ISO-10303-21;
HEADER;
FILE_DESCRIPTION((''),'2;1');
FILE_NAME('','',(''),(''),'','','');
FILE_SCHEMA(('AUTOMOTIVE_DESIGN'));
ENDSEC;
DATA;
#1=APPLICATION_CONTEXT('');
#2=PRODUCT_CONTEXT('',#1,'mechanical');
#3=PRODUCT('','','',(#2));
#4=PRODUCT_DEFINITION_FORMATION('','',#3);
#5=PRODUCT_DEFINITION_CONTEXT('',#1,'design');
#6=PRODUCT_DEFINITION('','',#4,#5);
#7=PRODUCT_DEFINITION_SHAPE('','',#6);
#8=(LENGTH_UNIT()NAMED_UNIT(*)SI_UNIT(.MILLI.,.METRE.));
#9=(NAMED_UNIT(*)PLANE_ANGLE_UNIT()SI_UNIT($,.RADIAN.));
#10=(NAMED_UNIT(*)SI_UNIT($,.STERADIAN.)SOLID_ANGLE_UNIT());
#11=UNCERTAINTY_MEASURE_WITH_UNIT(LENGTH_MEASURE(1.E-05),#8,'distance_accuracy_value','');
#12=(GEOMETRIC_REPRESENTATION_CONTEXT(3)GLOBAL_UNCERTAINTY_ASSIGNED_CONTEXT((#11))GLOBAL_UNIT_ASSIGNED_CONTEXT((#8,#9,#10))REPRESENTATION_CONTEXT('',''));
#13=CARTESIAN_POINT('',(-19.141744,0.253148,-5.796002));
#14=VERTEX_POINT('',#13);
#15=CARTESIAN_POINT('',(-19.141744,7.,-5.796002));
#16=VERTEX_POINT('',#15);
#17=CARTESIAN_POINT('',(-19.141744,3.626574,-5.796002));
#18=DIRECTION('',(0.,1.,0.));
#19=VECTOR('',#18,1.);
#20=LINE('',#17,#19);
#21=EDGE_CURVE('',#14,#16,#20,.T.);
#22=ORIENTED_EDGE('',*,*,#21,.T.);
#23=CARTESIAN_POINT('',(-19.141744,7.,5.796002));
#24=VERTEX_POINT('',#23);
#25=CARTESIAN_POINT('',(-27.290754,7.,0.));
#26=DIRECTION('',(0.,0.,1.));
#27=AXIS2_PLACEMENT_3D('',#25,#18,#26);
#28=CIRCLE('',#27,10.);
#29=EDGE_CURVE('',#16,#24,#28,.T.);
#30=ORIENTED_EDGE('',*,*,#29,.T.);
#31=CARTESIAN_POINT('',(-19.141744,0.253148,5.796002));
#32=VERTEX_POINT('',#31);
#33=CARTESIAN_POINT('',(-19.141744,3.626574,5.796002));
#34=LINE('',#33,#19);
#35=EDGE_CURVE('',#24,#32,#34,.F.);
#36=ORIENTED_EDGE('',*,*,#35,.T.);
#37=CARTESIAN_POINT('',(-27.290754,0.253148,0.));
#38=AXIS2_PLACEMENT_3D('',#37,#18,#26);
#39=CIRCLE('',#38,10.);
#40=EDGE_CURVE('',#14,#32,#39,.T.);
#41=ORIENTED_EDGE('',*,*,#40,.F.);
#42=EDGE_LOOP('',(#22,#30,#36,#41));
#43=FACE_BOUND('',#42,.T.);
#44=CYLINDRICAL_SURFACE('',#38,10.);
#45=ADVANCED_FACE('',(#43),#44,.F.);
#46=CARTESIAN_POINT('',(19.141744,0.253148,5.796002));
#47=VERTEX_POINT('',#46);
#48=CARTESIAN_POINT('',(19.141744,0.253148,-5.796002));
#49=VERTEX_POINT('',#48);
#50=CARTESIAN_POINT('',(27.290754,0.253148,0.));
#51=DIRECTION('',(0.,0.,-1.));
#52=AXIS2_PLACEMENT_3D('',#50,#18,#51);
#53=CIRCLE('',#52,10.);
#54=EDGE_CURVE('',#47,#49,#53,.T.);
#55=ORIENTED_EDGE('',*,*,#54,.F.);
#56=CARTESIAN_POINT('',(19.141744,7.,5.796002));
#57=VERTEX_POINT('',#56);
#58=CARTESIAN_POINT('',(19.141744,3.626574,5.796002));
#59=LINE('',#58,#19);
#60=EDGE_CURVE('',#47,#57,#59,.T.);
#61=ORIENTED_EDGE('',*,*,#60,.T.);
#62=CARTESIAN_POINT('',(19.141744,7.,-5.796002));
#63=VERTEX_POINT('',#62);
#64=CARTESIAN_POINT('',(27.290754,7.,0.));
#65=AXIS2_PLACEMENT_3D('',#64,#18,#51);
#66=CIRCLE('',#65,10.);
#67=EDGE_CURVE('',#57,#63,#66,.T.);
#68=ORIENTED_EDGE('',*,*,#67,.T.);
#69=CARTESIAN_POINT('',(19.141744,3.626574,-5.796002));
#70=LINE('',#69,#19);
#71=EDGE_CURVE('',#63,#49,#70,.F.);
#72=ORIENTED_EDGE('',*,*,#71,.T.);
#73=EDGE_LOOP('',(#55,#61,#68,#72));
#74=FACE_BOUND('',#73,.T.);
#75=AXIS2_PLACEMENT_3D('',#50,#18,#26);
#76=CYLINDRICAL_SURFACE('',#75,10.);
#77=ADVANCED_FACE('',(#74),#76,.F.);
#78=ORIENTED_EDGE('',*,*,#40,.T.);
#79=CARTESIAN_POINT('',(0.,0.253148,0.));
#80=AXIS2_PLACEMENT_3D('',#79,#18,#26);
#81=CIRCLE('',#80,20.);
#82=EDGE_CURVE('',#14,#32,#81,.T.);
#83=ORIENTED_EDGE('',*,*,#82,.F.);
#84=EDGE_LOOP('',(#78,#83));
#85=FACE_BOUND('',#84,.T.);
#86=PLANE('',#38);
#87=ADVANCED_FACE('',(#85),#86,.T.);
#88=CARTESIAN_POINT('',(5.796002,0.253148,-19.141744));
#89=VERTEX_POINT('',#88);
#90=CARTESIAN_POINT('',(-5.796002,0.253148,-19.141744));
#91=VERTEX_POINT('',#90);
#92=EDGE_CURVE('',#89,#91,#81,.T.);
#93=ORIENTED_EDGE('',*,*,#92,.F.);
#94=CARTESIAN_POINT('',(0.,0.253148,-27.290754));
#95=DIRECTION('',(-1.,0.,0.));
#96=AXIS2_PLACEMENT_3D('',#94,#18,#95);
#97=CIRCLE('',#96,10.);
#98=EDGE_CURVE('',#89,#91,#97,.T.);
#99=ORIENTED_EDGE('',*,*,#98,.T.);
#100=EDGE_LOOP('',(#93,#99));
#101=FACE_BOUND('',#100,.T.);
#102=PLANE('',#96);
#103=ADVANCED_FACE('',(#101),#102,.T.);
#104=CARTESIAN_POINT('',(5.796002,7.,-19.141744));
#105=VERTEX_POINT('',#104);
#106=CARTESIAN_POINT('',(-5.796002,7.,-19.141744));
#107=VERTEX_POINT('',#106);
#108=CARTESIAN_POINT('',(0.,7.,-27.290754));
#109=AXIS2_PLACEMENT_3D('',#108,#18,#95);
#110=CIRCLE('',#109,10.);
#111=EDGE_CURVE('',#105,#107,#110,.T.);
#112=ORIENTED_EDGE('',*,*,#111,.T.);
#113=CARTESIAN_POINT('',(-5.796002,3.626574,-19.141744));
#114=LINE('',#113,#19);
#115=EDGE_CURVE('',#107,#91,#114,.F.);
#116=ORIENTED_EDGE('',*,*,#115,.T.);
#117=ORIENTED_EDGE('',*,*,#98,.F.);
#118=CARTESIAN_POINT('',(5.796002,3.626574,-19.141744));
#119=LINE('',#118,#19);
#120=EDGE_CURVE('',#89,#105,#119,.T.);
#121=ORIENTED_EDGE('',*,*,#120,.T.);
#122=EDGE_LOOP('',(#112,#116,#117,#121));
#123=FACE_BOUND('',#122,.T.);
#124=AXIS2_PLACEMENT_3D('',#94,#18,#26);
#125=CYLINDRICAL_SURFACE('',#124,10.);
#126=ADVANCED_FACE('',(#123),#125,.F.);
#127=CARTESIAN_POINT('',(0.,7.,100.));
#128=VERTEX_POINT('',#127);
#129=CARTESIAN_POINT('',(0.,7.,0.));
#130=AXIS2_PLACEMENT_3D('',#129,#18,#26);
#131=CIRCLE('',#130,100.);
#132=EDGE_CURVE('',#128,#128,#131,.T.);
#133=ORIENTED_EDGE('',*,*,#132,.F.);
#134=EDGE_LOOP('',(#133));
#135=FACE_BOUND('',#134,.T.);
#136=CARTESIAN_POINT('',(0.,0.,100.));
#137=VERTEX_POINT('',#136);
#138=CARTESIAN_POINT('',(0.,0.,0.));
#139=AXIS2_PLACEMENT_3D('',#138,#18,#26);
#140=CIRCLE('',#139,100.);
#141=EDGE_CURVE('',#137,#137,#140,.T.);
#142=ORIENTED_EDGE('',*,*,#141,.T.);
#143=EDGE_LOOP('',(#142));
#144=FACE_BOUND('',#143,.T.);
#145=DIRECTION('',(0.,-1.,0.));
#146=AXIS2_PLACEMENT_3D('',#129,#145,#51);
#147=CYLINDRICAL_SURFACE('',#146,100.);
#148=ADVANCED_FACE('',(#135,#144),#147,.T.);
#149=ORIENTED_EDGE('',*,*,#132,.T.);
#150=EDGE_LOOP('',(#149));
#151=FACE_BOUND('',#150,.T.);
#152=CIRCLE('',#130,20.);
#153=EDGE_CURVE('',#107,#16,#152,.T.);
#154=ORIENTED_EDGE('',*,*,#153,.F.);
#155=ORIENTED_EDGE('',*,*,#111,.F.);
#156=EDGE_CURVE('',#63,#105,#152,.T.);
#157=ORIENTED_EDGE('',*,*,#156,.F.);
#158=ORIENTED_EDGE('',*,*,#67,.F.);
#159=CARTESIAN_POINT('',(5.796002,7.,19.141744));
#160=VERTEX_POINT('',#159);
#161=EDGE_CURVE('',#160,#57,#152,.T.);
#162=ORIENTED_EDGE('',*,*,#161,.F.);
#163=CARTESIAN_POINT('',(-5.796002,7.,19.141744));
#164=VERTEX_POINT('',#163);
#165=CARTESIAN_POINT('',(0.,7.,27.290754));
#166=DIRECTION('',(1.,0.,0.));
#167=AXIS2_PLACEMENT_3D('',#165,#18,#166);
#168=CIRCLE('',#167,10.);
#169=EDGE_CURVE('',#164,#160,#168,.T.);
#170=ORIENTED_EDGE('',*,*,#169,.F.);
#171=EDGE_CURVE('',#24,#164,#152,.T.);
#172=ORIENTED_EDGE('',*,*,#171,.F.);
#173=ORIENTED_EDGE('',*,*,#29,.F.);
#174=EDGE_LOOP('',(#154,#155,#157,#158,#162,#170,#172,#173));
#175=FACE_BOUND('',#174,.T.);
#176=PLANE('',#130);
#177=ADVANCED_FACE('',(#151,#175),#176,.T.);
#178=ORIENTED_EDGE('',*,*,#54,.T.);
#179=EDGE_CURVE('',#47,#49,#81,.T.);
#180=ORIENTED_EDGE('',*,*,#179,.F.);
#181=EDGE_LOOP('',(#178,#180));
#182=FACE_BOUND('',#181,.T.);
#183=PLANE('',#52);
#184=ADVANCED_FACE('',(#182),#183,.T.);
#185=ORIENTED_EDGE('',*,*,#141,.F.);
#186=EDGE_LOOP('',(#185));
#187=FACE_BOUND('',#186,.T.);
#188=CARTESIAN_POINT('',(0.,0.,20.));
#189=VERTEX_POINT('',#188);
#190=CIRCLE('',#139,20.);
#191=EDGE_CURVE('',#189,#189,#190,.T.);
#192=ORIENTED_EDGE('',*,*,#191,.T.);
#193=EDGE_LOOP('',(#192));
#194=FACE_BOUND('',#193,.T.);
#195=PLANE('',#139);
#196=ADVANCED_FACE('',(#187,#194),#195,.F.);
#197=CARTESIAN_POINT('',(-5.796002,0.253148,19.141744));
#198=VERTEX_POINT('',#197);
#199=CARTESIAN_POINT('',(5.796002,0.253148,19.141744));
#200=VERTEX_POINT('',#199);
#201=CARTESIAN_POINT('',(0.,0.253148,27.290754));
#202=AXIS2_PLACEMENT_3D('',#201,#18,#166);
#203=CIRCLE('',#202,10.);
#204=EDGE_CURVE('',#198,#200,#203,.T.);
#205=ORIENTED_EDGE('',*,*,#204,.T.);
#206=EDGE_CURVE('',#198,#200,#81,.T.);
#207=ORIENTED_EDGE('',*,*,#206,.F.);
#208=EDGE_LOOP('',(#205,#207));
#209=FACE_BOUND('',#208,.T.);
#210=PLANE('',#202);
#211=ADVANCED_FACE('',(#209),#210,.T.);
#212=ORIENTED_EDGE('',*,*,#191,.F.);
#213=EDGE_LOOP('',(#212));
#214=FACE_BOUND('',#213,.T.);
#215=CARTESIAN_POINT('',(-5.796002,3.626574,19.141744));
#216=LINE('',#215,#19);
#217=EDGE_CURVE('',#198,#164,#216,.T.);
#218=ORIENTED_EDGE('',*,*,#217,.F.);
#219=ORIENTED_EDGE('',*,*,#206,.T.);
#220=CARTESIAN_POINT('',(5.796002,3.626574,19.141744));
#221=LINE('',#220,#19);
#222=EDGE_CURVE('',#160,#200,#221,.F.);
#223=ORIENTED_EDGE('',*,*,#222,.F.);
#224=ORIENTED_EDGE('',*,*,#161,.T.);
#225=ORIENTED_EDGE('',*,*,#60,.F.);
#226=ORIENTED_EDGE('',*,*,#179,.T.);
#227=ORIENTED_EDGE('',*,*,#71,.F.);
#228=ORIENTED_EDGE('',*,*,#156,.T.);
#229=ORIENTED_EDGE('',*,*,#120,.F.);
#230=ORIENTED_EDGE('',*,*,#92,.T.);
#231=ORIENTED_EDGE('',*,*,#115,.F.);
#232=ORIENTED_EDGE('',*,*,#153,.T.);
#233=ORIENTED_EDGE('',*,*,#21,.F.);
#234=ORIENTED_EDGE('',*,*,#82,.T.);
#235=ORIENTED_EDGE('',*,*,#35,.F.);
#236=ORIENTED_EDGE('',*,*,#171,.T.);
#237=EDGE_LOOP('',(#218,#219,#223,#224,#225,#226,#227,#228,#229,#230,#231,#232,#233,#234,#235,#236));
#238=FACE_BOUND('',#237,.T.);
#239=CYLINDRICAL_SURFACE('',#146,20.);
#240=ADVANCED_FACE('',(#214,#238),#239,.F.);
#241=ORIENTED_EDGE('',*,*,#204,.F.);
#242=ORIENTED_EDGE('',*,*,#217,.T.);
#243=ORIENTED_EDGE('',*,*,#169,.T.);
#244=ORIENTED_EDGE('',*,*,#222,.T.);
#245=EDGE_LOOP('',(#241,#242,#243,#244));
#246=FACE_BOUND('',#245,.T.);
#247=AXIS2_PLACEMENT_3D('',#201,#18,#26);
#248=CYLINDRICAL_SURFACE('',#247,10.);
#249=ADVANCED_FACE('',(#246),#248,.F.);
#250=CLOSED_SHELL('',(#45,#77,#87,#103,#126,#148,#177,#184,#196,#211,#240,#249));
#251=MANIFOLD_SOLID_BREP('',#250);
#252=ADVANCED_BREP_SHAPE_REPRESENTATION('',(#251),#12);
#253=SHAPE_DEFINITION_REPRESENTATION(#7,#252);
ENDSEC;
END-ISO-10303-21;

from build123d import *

# Parameters (mm, degrees)
SKETCH1_R           = 100
BOSS_EXTRUDE1_DEPTH = 7
SKETCH2_R           = 20
CUT_EXTRUDE1_DEPTH  = 142.594491418
SKETCH3_R           = 10
CUT_EXTRUDE2_DEPTH  = 6.746851864
CIRPATTERN1_COUNT   = 4


with BuildPart() as part:
    # Sketch1 → Boss-Extrude1 (new body)
    with BuildSketch(Plane(origin=(0, 0, 0), x_dir=(1, 0, 0), z_dir=(0, 1, 0))):
        Circle(SKETCH1_R)
    extrude(amount=BOSS_EXTRUDE1_DEPTH)

    # Sketch2 → Cut-Extrude1 (cut, through all)
    with BuildSketch(Plane(origin=(0, 0, 0), x_dir=(1, 0, 0), z_dir=(0, 1, 0))):
        Circle(SKETCH2_R)
    extrude(amount=CUT_EXTRUDE1_DEPTH, mode=Mode.SUBTRACT)

    # Sketch3 → Cut-Extrude2 (cut)
    with BuildSketch(Plane(origin=(0, 7, 0), x_dir=(1, 0, 0), z_dir=(0, 1, 0))):
        with Locations((-27.2907537, 0)):
            Circle(SKETCH3_R)
    cut_extrude2 = extrude(amount=-CUT_EXTRUDE2_DEPTH, mode=Mode.SUBTRACT)

    # CirPattern1: Cut-Extrude2 ×4 about axis
    cirpattern1_axis = Axis((0, 0, 0), (0, 1, 0))
    for i in range(1, CIRPATTERN1_COUNT):
        add(cut_extrude2.rotate(cirpattern1_axis, i * 360 / CIRPATTERN1_COUNT), mode=Mode.SUBTRACT)


solid = part.part
